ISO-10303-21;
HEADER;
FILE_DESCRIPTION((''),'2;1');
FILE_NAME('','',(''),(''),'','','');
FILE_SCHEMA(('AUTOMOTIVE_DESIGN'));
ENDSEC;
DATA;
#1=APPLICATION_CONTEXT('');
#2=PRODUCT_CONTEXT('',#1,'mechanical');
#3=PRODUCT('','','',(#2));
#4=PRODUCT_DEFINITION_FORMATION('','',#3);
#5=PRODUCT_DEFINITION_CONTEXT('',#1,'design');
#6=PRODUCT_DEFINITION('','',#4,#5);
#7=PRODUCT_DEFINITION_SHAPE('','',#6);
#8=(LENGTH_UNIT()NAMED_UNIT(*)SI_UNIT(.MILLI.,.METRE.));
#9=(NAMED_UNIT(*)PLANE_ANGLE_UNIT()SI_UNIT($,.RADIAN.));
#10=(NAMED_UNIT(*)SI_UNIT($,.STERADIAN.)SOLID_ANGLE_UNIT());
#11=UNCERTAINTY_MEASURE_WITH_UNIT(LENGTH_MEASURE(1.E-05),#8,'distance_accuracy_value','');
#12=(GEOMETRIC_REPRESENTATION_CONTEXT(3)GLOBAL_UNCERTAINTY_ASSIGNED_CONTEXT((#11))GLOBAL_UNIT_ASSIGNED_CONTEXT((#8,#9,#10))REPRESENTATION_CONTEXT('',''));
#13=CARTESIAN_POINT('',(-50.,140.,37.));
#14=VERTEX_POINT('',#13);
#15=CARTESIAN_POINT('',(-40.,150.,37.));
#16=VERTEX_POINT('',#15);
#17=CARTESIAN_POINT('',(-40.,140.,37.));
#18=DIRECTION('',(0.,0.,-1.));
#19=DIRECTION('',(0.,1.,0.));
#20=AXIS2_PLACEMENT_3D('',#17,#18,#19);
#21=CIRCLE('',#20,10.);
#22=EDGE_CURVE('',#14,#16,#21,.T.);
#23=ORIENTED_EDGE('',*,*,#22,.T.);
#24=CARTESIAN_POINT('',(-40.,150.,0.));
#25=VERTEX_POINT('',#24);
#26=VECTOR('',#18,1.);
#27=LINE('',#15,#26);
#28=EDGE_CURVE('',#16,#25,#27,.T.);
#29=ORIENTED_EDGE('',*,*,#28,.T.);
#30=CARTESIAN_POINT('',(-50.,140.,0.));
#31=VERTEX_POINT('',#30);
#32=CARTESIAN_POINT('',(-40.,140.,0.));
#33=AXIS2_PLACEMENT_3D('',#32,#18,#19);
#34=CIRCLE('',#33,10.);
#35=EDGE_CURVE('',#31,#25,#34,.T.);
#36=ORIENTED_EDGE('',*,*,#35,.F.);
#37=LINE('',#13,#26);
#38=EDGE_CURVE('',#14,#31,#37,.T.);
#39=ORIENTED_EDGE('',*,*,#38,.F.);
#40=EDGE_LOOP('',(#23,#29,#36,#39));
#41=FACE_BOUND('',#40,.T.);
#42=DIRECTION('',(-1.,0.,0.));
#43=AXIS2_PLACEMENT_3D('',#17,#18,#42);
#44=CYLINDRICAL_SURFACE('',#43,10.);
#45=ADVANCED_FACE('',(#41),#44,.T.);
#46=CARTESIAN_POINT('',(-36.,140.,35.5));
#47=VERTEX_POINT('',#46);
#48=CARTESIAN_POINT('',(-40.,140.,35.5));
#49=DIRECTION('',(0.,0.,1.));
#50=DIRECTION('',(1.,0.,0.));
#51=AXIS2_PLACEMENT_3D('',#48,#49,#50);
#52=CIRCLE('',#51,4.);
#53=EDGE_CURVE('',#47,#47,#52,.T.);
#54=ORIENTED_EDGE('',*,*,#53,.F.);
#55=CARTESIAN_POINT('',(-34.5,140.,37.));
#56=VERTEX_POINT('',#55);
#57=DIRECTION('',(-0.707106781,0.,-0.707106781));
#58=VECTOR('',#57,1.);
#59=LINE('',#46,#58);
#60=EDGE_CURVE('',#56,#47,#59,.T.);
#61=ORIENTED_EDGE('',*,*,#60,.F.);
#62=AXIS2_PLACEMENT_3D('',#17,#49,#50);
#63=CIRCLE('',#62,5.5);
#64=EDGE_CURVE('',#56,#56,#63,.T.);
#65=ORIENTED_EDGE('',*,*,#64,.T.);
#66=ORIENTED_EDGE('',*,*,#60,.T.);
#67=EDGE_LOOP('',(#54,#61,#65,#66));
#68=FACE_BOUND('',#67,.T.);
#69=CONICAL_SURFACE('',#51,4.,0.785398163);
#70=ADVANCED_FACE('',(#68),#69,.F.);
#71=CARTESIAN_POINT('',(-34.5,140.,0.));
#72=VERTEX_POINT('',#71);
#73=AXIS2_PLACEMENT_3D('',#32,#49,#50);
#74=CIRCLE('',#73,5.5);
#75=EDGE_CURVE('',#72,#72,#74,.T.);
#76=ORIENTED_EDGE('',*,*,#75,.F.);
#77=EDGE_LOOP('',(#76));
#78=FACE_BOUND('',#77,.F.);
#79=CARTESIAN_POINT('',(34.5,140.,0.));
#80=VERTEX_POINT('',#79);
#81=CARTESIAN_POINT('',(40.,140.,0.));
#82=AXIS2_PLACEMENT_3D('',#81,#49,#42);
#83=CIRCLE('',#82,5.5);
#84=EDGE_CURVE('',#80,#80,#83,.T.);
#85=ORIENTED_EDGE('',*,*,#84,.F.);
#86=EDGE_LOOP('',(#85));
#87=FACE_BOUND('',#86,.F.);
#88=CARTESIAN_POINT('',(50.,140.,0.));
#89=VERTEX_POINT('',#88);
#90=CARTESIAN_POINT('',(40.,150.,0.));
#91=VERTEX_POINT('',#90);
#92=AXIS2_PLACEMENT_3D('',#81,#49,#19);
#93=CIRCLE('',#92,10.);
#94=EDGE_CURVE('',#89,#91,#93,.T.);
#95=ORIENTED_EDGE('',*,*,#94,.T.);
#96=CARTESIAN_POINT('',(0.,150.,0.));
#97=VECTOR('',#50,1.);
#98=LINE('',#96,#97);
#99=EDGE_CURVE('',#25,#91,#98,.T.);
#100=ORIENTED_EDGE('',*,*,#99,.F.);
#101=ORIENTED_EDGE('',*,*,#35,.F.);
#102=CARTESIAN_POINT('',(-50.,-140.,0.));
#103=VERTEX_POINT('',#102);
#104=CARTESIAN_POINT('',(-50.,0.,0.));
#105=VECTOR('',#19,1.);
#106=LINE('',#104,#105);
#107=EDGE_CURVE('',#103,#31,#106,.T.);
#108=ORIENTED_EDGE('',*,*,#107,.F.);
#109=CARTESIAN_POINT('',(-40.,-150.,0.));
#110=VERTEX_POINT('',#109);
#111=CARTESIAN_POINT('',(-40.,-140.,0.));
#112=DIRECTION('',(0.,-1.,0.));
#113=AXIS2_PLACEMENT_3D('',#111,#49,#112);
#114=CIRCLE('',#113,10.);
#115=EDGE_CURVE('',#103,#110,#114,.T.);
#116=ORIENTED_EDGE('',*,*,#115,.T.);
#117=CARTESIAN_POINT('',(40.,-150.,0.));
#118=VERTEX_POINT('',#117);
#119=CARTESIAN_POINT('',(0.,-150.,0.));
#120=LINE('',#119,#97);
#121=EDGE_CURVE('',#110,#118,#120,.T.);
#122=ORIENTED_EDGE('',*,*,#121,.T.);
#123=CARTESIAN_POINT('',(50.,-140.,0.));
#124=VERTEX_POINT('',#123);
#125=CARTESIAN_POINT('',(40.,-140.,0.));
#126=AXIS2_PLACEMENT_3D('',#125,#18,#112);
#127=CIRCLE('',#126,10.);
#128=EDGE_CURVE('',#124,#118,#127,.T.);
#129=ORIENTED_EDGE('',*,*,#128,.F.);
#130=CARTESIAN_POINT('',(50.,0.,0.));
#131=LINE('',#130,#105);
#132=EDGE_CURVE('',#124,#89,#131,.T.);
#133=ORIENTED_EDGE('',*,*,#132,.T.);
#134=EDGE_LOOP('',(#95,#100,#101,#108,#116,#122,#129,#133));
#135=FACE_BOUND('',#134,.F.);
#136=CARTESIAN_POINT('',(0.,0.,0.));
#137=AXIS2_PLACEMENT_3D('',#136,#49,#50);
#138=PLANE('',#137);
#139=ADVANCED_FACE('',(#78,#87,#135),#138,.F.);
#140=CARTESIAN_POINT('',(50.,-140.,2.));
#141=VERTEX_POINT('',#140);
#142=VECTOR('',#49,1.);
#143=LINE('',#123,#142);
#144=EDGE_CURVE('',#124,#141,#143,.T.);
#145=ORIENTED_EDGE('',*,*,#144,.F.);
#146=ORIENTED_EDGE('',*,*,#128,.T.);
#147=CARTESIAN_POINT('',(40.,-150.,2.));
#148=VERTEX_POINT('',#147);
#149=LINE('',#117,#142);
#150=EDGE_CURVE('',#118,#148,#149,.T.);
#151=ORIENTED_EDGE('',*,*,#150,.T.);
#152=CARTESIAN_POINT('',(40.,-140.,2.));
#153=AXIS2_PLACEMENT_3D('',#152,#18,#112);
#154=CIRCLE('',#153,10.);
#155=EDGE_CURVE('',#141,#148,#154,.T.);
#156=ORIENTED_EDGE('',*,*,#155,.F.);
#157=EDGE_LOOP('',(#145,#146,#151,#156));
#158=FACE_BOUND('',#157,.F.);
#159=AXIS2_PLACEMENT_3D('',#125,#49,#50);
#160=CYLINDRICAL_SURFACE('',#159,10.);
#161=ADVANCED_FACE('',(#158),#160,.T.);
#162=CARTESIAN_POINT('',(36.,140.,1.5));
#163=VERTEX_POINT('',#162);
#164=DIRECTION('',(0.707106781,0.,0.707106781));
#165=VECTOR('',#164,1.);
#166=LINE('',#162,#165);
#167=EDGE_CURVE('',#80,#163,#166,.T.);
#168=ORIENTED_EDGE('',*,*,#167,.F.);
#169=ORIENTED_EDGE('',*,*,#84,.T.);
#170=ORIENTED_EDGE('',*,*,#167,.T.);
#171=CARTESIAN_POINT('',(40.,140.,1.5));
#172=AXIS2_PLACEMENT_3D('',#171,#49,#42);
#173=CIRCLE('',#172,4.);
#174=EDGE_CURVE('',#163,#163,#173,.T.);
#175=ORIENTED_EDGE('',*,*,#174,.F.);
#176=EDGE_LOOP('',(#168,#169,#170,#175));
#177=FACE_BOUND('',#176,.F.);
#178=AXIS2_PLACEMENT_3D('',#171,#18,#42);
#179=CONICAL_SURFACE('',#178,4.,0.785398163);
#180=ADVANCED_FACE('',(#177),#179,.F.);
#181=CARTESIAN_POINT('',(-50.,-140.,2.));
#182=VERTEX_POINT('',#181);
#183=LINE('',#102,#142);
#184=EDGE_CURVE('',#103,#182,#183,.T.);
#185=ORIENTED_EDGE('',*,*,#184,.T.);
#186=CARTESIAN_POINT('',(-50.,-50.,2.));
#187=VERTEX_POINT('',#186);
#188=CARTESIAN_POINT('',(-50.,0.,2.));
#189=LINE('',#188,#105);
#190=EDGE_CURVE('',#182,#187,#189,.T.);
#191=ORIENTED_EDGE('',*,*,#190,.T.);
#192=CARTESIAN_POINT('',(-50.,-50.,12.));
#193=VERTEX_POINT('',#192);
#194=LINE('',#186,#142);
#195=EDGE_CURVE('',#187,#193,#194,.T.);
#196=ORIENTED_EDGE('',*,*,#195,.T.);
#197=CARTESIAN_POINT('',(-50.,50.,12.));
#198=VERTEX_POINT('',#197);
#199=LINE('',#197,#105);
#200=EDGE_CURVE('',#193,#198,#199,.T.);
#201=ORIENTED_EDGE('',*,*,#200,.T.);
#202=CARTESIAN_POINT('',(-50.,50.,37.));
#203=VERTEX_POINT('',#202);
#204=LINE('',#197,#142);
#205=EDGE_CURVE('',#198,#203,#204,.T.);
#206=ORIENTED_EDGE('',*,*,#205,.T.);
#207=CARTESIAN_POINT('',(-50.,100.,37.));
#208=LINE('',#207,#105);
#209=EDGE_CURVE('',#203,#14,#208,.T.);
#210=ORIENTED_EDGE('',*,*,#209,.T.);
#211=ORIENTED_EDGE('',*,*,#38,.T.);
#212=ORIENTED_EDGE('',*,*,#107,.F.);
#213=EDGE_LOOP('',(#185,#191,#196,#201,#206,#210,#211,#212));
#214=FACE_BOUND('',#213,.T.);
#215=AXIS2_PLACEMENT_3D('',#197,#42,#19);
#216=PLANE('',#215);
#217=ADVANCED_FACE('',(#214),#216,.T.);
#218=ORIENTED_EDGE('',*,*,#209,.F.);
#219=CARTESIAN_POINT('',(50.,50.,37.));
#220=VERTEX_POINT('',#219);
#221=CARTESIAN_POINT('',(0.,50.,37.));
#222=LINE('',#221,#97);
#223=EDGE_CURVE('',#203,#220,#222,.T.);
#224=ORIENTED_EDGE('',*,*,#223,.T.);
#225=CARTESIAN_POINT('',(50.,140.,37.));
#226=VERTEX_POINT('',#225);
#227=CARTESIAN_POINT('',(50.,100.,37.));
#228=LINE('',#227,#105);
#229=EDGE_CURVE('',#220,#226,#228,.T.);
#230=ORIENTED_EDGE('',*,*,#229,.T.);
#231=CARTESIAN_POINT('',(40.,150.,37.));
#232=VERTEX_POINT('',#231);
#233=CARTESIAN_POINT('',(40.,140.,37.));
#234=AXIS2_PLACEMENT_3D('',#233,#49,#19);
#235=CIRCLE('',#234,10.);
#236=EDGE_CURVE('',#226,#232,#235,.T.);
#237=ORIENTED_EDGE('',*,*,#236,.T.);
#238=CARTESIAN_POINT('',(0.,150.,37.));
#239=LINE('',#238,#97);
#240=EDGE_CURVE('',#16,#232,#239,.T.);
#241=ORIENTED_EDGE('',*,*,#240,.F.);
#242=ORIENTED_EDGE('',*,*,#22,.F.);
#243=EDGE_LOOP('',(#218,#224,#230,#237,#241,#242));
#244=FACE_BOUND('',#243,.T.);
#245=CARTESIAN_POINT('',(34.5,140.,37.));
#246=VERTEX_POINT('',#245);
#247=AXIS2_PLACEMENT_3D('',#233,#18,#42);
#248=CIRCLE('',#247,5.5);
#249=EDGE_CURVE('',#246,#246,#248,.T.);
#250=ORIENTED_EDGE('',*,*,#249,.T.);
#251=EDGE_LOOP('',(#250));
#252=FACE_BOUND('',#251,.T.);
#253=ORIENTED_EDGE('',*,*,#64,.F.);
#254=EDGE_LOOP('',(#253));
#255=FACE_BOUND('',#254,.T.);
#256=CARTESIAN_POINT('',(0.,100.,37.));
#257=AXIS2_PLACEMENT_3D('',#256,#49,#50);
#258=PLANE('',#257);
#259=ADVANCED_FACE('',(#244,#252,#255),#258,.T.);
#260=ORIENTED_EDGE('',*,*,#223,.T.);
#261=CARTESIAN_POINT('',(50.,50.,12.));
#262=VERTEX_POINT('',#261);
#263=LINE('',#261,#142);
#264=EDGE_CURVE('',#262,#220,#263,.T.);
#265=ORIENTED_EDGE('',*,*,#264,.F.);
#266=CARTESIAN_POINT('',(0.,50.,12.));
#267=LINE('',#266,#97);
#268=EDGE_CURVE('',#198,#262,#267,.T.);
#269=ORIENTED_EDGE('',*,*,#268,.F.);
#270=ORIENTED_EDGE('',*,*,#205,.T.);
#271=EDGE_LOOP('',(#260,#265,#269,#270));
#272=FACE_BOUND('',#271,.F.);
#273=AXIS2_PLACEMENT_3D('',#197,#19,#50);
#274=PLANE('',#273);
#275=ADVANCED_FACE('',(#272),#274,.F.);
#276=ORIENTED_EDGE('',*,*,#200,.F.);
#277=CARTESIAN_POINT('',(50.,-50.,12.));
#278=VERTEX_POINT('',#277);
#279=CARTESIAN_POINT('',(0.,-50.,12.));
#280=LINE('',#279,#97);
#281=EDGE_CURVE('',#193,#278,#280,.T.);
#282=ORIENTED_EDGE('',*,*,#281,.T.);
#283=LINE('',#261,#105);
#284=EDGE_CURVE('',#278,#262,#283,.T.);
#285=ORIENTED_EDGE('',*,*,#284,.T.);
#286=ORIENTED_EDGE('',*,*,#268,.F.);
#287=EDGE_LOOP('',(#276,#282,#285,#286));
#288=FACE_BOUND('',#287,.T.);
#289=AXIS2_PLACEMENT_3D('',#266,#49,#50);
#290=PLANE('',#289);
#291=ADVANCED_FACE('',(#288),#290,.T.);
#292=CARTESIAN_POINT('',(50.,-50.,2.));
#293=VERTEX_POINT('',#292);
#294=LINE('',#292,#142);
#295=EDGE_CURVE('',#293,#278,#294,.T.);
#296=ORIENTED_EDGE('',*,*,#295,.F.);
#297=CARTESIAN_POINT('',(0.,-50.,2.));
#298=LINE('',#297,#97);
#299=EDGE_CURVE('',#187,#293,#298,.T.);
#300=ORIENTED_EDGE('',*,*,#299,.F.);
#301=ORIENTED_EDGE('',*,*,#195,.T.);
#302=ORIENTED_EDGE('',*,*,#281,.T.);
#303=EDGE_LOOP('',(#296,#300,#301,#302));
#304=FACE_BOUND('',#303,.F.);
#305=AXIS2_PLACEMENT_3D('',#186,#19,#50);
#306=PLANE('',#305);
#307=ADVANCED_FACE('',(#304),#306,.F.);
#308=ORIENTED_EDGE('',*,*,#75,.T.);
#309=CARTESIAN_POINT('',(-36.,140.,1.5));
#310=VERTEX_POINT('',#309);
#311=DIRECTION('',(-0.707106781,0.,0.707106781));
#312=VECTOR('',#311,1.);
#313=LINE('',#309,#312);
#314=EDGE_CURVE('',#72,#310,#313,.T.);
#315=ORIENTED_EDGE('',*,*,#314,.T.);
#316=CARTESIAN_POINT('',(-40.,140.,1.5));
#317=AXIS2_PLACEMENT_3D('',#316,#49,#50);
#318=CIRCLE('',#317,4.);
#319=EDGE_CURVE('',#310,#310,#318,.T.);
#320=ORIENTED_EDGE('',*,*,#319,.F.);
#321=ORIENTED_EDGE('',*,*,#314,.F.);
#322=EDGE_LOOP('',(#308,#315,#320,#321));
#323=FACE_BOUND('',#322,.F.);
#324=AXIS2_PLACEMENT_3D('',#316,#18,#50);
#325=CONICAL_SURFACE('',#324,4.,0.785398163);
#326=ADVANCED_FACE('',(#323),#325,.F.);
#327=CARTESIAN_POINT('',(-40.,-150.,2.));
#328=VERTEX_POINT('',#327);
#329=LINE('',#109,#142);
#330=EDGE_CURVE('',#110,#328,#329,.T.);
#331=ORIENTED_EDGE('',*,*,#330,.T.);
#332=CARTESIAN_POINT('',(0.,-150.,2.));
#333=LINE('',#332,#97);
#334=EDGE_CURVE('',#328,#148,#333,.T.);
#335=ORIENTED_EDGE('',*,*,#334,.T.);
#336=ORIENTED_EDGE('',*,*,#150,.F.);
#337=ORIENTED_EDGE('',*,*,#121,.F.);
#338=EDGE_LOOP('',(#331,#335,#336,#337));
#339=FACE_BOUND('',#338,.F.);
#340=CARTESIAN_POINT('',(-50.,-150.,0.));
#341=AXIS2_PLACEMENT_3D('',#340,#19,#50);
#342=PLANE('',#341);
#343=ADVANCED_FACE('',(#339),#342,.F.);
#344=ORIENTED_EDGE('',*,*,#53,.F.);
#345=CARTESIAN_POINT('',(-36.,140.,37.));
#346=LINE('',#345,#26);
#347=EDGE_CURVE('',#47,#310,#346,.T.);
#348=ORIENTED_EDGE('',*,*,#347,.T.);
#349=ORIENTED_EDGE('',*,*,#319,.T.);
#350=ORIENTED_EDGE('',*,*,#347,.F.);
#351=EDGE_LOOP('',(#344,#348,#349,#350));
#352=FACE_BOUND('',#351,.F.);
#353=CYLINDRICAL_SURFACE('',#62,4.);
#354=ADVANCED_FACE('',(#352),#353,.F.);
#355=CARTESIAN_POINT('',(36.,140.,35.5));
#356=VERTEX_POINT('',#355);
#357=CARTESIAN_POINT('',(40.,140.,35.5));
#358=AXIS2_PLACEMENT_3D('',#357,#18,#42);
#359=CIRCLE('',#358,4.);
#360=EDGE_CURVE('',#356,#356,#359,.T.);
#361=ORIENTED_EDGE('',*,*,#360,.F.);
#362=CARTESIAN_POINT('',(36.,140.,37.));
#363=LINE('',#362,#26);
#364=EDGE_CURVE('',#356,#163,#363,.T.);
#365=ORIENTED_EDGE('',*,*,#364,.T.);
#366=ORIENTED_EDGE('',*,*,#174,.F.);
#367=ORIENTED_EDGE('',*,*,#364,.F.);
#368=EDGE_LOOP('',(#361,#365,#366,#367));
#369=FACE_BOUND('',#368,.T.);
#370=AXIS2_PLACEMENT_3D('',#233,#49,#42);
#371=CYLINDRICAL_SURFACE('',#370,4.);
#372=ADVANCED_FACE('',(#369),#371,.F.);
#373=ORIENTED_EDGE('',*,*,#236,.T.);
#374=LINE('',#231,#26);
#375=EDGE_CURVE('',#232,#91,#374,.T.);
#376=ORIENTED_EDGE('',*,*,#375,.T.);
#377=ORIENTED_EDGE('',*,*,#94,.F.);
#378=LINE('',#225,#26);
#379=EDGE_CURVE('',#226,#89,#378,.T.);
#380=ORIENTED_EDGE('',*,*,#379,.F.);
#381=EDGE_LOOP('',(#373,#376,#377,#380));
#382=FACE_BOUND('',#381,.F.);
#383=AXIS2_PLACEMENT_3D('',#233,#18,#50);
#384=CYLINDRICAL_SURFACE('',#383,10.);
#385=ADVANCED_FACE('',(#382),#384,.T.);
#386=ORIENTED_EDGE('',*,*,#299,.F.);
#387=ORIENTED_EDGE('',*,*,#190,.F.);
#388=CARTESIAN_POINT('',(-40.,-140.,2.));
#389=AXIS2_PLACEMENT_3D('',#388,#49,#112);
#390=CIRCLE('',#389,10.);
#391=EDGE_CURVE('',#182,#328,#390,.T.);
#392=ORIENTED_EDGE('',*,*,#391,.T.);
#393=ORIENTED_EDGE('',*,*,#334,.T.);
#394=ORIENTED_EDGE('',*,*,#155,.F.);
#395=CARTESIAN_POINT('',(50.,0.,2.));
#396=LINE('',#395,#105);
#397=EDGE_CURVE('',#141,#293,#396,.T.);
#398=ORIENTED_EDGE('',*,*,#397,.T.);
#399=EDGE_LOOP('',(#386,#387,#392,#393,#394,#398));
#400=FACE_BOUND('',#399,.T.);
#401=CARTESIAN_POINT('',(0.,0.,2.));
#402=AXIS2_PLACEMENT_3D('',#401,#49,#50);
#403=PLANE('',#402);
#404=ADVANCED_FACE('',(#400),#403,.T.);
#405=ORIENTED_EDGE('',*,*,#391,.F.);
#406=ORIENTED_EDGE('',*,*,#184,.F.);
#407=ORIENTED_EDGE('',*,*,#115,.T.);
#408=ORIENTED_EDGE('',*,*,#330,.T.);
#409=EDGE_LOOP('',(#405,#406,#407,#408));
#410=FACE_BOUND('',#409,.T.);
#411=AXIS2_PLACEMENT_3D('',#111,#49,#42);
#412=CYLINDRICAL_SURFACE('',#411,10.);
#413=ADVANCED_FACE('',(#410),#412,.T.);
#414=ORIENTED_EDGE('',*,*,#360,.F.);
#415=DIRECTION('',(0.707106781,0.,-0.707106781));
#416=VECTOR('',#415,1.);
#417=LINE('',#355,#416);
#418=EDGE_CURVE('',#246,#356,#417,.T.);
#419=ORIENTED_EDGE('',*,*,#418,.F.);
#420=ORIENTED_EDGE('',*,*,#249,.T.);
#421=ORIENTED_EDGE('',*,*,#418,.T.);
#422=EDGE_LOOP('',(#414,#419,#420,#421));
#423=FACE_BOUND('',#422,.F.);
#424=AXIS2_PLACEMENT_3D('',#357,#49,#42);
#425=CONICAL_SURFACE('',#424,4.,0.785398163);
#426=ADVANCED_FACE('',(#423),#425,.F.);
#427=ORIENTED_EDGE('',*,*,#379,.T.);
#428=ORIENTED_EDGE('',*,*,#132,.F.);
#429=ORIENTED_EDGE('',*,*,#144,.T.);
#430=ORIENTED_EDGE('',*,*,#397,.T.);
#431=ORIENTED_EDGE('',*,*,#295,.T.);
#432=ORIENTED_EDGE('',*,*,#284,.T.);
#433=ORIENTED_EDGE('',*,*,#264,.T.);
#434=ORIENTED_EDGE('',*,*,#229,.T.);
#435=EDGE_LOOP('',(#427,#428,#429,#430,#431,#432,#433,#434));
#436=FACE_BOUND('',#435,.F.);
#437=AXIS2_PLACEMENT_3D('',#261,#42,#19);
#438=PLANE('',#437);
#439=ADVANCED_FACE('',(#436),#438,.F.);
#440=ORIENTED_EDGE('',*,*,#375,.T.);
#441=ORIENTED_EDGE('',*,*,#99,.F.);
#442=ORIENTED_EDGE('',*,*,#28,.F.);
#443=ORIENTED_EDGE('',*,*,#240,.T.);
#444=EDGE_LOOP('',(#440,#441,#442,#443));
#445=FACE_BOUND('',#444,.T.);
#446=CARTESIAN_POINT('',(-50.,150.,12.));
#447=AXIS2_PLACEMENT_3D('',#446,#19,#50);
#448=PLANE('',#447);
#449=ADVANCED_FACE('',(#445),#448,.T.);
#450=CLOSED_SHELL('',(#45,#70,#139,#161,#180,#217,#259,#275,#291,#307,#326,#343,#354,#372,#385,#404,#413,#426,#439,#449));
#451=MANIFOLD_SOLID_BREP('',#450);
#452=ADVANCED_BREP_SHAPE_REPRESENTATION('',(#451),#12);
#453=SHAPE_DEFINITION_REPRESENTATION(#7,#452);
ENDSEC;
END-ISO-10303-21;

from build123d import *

# Parameters (mm, degrees)
F0_W     = 100
F0_H     = 300
F1_DEPTH = 2
F2_W     = 100
F2_H     = 200
F3_DEPTH = 10
F4_W     = 100
F4_H     = 100
F5_DEPTH = 25
F6_R     = 10
F7_R     = 4
F8_DEPTH = 37.001
F9_SIZE  = 1.5


# Not quite as in the source:
# - a pattern or mirror of a feature is missing from the dataset's text; its kind, count and spacing are read off the source's solid


with BuildPart() as f1:
    # F0 (on Top) → F1 (new body)
    with BuildSketch(Plane.XY):
        Rectangle(F0_W, F0_H)
    extrude(amount=F1_DEPTH)

    # F2 (on face) → F3 (join)
    with BuildSketch(Plane.XY.offset(2)):
        with Locations((0, 50)):
            Rectangle(F2_W, F2_H)
    extrude(amount=F3_DEPTH)

    # F4 (on face) → F5 (join)
    with BuildSketch(Plane.XY.offset(12)):
        with Locations((0, 100)):
            Rectangle(F4_W, F4_H)
    extrude(amount=F5_DEPTH)

    # F6
    f6_edges = [f1.edges().sort_by_distance(p)[0] for p in [
        (-50, 150, 18.5),
        (-50, -150, 1),
        (50, -150, 1),
        (50, 150, 18.5),
    ]]
    fillet(f6_edges, radius=F6_R)

    # F7 (on face) → F8 (cut, through all)
    with BuildSketch(Plane.XY.offset(37)):
        with Locations((-40, 140)):
            Circle(F7_R)
    f8 = extrude(amount=-F8_DEPTH, mode=Mode.SUBTRACT)

    # F8_copies: F8 across plane
    add(f8.mirror(Plane(origin=(0, 0, 0), x_dir=(0, 0, 1), z_dir=(1, 0, 0))), mode=Mode.SUBTRACT)

    # F9
    f9_edges = [f1.edges().sort_by_distance(p)[0] for p in [
        (-44, 140, 37),
        (-36, 140, 18.5),
        (-44, 140, 0),
        (44, 140, 0),
        (44, 140, 37),
    ]]
    chamfer(f9_edges, length=F9_SIZE)


solid = f1.part
